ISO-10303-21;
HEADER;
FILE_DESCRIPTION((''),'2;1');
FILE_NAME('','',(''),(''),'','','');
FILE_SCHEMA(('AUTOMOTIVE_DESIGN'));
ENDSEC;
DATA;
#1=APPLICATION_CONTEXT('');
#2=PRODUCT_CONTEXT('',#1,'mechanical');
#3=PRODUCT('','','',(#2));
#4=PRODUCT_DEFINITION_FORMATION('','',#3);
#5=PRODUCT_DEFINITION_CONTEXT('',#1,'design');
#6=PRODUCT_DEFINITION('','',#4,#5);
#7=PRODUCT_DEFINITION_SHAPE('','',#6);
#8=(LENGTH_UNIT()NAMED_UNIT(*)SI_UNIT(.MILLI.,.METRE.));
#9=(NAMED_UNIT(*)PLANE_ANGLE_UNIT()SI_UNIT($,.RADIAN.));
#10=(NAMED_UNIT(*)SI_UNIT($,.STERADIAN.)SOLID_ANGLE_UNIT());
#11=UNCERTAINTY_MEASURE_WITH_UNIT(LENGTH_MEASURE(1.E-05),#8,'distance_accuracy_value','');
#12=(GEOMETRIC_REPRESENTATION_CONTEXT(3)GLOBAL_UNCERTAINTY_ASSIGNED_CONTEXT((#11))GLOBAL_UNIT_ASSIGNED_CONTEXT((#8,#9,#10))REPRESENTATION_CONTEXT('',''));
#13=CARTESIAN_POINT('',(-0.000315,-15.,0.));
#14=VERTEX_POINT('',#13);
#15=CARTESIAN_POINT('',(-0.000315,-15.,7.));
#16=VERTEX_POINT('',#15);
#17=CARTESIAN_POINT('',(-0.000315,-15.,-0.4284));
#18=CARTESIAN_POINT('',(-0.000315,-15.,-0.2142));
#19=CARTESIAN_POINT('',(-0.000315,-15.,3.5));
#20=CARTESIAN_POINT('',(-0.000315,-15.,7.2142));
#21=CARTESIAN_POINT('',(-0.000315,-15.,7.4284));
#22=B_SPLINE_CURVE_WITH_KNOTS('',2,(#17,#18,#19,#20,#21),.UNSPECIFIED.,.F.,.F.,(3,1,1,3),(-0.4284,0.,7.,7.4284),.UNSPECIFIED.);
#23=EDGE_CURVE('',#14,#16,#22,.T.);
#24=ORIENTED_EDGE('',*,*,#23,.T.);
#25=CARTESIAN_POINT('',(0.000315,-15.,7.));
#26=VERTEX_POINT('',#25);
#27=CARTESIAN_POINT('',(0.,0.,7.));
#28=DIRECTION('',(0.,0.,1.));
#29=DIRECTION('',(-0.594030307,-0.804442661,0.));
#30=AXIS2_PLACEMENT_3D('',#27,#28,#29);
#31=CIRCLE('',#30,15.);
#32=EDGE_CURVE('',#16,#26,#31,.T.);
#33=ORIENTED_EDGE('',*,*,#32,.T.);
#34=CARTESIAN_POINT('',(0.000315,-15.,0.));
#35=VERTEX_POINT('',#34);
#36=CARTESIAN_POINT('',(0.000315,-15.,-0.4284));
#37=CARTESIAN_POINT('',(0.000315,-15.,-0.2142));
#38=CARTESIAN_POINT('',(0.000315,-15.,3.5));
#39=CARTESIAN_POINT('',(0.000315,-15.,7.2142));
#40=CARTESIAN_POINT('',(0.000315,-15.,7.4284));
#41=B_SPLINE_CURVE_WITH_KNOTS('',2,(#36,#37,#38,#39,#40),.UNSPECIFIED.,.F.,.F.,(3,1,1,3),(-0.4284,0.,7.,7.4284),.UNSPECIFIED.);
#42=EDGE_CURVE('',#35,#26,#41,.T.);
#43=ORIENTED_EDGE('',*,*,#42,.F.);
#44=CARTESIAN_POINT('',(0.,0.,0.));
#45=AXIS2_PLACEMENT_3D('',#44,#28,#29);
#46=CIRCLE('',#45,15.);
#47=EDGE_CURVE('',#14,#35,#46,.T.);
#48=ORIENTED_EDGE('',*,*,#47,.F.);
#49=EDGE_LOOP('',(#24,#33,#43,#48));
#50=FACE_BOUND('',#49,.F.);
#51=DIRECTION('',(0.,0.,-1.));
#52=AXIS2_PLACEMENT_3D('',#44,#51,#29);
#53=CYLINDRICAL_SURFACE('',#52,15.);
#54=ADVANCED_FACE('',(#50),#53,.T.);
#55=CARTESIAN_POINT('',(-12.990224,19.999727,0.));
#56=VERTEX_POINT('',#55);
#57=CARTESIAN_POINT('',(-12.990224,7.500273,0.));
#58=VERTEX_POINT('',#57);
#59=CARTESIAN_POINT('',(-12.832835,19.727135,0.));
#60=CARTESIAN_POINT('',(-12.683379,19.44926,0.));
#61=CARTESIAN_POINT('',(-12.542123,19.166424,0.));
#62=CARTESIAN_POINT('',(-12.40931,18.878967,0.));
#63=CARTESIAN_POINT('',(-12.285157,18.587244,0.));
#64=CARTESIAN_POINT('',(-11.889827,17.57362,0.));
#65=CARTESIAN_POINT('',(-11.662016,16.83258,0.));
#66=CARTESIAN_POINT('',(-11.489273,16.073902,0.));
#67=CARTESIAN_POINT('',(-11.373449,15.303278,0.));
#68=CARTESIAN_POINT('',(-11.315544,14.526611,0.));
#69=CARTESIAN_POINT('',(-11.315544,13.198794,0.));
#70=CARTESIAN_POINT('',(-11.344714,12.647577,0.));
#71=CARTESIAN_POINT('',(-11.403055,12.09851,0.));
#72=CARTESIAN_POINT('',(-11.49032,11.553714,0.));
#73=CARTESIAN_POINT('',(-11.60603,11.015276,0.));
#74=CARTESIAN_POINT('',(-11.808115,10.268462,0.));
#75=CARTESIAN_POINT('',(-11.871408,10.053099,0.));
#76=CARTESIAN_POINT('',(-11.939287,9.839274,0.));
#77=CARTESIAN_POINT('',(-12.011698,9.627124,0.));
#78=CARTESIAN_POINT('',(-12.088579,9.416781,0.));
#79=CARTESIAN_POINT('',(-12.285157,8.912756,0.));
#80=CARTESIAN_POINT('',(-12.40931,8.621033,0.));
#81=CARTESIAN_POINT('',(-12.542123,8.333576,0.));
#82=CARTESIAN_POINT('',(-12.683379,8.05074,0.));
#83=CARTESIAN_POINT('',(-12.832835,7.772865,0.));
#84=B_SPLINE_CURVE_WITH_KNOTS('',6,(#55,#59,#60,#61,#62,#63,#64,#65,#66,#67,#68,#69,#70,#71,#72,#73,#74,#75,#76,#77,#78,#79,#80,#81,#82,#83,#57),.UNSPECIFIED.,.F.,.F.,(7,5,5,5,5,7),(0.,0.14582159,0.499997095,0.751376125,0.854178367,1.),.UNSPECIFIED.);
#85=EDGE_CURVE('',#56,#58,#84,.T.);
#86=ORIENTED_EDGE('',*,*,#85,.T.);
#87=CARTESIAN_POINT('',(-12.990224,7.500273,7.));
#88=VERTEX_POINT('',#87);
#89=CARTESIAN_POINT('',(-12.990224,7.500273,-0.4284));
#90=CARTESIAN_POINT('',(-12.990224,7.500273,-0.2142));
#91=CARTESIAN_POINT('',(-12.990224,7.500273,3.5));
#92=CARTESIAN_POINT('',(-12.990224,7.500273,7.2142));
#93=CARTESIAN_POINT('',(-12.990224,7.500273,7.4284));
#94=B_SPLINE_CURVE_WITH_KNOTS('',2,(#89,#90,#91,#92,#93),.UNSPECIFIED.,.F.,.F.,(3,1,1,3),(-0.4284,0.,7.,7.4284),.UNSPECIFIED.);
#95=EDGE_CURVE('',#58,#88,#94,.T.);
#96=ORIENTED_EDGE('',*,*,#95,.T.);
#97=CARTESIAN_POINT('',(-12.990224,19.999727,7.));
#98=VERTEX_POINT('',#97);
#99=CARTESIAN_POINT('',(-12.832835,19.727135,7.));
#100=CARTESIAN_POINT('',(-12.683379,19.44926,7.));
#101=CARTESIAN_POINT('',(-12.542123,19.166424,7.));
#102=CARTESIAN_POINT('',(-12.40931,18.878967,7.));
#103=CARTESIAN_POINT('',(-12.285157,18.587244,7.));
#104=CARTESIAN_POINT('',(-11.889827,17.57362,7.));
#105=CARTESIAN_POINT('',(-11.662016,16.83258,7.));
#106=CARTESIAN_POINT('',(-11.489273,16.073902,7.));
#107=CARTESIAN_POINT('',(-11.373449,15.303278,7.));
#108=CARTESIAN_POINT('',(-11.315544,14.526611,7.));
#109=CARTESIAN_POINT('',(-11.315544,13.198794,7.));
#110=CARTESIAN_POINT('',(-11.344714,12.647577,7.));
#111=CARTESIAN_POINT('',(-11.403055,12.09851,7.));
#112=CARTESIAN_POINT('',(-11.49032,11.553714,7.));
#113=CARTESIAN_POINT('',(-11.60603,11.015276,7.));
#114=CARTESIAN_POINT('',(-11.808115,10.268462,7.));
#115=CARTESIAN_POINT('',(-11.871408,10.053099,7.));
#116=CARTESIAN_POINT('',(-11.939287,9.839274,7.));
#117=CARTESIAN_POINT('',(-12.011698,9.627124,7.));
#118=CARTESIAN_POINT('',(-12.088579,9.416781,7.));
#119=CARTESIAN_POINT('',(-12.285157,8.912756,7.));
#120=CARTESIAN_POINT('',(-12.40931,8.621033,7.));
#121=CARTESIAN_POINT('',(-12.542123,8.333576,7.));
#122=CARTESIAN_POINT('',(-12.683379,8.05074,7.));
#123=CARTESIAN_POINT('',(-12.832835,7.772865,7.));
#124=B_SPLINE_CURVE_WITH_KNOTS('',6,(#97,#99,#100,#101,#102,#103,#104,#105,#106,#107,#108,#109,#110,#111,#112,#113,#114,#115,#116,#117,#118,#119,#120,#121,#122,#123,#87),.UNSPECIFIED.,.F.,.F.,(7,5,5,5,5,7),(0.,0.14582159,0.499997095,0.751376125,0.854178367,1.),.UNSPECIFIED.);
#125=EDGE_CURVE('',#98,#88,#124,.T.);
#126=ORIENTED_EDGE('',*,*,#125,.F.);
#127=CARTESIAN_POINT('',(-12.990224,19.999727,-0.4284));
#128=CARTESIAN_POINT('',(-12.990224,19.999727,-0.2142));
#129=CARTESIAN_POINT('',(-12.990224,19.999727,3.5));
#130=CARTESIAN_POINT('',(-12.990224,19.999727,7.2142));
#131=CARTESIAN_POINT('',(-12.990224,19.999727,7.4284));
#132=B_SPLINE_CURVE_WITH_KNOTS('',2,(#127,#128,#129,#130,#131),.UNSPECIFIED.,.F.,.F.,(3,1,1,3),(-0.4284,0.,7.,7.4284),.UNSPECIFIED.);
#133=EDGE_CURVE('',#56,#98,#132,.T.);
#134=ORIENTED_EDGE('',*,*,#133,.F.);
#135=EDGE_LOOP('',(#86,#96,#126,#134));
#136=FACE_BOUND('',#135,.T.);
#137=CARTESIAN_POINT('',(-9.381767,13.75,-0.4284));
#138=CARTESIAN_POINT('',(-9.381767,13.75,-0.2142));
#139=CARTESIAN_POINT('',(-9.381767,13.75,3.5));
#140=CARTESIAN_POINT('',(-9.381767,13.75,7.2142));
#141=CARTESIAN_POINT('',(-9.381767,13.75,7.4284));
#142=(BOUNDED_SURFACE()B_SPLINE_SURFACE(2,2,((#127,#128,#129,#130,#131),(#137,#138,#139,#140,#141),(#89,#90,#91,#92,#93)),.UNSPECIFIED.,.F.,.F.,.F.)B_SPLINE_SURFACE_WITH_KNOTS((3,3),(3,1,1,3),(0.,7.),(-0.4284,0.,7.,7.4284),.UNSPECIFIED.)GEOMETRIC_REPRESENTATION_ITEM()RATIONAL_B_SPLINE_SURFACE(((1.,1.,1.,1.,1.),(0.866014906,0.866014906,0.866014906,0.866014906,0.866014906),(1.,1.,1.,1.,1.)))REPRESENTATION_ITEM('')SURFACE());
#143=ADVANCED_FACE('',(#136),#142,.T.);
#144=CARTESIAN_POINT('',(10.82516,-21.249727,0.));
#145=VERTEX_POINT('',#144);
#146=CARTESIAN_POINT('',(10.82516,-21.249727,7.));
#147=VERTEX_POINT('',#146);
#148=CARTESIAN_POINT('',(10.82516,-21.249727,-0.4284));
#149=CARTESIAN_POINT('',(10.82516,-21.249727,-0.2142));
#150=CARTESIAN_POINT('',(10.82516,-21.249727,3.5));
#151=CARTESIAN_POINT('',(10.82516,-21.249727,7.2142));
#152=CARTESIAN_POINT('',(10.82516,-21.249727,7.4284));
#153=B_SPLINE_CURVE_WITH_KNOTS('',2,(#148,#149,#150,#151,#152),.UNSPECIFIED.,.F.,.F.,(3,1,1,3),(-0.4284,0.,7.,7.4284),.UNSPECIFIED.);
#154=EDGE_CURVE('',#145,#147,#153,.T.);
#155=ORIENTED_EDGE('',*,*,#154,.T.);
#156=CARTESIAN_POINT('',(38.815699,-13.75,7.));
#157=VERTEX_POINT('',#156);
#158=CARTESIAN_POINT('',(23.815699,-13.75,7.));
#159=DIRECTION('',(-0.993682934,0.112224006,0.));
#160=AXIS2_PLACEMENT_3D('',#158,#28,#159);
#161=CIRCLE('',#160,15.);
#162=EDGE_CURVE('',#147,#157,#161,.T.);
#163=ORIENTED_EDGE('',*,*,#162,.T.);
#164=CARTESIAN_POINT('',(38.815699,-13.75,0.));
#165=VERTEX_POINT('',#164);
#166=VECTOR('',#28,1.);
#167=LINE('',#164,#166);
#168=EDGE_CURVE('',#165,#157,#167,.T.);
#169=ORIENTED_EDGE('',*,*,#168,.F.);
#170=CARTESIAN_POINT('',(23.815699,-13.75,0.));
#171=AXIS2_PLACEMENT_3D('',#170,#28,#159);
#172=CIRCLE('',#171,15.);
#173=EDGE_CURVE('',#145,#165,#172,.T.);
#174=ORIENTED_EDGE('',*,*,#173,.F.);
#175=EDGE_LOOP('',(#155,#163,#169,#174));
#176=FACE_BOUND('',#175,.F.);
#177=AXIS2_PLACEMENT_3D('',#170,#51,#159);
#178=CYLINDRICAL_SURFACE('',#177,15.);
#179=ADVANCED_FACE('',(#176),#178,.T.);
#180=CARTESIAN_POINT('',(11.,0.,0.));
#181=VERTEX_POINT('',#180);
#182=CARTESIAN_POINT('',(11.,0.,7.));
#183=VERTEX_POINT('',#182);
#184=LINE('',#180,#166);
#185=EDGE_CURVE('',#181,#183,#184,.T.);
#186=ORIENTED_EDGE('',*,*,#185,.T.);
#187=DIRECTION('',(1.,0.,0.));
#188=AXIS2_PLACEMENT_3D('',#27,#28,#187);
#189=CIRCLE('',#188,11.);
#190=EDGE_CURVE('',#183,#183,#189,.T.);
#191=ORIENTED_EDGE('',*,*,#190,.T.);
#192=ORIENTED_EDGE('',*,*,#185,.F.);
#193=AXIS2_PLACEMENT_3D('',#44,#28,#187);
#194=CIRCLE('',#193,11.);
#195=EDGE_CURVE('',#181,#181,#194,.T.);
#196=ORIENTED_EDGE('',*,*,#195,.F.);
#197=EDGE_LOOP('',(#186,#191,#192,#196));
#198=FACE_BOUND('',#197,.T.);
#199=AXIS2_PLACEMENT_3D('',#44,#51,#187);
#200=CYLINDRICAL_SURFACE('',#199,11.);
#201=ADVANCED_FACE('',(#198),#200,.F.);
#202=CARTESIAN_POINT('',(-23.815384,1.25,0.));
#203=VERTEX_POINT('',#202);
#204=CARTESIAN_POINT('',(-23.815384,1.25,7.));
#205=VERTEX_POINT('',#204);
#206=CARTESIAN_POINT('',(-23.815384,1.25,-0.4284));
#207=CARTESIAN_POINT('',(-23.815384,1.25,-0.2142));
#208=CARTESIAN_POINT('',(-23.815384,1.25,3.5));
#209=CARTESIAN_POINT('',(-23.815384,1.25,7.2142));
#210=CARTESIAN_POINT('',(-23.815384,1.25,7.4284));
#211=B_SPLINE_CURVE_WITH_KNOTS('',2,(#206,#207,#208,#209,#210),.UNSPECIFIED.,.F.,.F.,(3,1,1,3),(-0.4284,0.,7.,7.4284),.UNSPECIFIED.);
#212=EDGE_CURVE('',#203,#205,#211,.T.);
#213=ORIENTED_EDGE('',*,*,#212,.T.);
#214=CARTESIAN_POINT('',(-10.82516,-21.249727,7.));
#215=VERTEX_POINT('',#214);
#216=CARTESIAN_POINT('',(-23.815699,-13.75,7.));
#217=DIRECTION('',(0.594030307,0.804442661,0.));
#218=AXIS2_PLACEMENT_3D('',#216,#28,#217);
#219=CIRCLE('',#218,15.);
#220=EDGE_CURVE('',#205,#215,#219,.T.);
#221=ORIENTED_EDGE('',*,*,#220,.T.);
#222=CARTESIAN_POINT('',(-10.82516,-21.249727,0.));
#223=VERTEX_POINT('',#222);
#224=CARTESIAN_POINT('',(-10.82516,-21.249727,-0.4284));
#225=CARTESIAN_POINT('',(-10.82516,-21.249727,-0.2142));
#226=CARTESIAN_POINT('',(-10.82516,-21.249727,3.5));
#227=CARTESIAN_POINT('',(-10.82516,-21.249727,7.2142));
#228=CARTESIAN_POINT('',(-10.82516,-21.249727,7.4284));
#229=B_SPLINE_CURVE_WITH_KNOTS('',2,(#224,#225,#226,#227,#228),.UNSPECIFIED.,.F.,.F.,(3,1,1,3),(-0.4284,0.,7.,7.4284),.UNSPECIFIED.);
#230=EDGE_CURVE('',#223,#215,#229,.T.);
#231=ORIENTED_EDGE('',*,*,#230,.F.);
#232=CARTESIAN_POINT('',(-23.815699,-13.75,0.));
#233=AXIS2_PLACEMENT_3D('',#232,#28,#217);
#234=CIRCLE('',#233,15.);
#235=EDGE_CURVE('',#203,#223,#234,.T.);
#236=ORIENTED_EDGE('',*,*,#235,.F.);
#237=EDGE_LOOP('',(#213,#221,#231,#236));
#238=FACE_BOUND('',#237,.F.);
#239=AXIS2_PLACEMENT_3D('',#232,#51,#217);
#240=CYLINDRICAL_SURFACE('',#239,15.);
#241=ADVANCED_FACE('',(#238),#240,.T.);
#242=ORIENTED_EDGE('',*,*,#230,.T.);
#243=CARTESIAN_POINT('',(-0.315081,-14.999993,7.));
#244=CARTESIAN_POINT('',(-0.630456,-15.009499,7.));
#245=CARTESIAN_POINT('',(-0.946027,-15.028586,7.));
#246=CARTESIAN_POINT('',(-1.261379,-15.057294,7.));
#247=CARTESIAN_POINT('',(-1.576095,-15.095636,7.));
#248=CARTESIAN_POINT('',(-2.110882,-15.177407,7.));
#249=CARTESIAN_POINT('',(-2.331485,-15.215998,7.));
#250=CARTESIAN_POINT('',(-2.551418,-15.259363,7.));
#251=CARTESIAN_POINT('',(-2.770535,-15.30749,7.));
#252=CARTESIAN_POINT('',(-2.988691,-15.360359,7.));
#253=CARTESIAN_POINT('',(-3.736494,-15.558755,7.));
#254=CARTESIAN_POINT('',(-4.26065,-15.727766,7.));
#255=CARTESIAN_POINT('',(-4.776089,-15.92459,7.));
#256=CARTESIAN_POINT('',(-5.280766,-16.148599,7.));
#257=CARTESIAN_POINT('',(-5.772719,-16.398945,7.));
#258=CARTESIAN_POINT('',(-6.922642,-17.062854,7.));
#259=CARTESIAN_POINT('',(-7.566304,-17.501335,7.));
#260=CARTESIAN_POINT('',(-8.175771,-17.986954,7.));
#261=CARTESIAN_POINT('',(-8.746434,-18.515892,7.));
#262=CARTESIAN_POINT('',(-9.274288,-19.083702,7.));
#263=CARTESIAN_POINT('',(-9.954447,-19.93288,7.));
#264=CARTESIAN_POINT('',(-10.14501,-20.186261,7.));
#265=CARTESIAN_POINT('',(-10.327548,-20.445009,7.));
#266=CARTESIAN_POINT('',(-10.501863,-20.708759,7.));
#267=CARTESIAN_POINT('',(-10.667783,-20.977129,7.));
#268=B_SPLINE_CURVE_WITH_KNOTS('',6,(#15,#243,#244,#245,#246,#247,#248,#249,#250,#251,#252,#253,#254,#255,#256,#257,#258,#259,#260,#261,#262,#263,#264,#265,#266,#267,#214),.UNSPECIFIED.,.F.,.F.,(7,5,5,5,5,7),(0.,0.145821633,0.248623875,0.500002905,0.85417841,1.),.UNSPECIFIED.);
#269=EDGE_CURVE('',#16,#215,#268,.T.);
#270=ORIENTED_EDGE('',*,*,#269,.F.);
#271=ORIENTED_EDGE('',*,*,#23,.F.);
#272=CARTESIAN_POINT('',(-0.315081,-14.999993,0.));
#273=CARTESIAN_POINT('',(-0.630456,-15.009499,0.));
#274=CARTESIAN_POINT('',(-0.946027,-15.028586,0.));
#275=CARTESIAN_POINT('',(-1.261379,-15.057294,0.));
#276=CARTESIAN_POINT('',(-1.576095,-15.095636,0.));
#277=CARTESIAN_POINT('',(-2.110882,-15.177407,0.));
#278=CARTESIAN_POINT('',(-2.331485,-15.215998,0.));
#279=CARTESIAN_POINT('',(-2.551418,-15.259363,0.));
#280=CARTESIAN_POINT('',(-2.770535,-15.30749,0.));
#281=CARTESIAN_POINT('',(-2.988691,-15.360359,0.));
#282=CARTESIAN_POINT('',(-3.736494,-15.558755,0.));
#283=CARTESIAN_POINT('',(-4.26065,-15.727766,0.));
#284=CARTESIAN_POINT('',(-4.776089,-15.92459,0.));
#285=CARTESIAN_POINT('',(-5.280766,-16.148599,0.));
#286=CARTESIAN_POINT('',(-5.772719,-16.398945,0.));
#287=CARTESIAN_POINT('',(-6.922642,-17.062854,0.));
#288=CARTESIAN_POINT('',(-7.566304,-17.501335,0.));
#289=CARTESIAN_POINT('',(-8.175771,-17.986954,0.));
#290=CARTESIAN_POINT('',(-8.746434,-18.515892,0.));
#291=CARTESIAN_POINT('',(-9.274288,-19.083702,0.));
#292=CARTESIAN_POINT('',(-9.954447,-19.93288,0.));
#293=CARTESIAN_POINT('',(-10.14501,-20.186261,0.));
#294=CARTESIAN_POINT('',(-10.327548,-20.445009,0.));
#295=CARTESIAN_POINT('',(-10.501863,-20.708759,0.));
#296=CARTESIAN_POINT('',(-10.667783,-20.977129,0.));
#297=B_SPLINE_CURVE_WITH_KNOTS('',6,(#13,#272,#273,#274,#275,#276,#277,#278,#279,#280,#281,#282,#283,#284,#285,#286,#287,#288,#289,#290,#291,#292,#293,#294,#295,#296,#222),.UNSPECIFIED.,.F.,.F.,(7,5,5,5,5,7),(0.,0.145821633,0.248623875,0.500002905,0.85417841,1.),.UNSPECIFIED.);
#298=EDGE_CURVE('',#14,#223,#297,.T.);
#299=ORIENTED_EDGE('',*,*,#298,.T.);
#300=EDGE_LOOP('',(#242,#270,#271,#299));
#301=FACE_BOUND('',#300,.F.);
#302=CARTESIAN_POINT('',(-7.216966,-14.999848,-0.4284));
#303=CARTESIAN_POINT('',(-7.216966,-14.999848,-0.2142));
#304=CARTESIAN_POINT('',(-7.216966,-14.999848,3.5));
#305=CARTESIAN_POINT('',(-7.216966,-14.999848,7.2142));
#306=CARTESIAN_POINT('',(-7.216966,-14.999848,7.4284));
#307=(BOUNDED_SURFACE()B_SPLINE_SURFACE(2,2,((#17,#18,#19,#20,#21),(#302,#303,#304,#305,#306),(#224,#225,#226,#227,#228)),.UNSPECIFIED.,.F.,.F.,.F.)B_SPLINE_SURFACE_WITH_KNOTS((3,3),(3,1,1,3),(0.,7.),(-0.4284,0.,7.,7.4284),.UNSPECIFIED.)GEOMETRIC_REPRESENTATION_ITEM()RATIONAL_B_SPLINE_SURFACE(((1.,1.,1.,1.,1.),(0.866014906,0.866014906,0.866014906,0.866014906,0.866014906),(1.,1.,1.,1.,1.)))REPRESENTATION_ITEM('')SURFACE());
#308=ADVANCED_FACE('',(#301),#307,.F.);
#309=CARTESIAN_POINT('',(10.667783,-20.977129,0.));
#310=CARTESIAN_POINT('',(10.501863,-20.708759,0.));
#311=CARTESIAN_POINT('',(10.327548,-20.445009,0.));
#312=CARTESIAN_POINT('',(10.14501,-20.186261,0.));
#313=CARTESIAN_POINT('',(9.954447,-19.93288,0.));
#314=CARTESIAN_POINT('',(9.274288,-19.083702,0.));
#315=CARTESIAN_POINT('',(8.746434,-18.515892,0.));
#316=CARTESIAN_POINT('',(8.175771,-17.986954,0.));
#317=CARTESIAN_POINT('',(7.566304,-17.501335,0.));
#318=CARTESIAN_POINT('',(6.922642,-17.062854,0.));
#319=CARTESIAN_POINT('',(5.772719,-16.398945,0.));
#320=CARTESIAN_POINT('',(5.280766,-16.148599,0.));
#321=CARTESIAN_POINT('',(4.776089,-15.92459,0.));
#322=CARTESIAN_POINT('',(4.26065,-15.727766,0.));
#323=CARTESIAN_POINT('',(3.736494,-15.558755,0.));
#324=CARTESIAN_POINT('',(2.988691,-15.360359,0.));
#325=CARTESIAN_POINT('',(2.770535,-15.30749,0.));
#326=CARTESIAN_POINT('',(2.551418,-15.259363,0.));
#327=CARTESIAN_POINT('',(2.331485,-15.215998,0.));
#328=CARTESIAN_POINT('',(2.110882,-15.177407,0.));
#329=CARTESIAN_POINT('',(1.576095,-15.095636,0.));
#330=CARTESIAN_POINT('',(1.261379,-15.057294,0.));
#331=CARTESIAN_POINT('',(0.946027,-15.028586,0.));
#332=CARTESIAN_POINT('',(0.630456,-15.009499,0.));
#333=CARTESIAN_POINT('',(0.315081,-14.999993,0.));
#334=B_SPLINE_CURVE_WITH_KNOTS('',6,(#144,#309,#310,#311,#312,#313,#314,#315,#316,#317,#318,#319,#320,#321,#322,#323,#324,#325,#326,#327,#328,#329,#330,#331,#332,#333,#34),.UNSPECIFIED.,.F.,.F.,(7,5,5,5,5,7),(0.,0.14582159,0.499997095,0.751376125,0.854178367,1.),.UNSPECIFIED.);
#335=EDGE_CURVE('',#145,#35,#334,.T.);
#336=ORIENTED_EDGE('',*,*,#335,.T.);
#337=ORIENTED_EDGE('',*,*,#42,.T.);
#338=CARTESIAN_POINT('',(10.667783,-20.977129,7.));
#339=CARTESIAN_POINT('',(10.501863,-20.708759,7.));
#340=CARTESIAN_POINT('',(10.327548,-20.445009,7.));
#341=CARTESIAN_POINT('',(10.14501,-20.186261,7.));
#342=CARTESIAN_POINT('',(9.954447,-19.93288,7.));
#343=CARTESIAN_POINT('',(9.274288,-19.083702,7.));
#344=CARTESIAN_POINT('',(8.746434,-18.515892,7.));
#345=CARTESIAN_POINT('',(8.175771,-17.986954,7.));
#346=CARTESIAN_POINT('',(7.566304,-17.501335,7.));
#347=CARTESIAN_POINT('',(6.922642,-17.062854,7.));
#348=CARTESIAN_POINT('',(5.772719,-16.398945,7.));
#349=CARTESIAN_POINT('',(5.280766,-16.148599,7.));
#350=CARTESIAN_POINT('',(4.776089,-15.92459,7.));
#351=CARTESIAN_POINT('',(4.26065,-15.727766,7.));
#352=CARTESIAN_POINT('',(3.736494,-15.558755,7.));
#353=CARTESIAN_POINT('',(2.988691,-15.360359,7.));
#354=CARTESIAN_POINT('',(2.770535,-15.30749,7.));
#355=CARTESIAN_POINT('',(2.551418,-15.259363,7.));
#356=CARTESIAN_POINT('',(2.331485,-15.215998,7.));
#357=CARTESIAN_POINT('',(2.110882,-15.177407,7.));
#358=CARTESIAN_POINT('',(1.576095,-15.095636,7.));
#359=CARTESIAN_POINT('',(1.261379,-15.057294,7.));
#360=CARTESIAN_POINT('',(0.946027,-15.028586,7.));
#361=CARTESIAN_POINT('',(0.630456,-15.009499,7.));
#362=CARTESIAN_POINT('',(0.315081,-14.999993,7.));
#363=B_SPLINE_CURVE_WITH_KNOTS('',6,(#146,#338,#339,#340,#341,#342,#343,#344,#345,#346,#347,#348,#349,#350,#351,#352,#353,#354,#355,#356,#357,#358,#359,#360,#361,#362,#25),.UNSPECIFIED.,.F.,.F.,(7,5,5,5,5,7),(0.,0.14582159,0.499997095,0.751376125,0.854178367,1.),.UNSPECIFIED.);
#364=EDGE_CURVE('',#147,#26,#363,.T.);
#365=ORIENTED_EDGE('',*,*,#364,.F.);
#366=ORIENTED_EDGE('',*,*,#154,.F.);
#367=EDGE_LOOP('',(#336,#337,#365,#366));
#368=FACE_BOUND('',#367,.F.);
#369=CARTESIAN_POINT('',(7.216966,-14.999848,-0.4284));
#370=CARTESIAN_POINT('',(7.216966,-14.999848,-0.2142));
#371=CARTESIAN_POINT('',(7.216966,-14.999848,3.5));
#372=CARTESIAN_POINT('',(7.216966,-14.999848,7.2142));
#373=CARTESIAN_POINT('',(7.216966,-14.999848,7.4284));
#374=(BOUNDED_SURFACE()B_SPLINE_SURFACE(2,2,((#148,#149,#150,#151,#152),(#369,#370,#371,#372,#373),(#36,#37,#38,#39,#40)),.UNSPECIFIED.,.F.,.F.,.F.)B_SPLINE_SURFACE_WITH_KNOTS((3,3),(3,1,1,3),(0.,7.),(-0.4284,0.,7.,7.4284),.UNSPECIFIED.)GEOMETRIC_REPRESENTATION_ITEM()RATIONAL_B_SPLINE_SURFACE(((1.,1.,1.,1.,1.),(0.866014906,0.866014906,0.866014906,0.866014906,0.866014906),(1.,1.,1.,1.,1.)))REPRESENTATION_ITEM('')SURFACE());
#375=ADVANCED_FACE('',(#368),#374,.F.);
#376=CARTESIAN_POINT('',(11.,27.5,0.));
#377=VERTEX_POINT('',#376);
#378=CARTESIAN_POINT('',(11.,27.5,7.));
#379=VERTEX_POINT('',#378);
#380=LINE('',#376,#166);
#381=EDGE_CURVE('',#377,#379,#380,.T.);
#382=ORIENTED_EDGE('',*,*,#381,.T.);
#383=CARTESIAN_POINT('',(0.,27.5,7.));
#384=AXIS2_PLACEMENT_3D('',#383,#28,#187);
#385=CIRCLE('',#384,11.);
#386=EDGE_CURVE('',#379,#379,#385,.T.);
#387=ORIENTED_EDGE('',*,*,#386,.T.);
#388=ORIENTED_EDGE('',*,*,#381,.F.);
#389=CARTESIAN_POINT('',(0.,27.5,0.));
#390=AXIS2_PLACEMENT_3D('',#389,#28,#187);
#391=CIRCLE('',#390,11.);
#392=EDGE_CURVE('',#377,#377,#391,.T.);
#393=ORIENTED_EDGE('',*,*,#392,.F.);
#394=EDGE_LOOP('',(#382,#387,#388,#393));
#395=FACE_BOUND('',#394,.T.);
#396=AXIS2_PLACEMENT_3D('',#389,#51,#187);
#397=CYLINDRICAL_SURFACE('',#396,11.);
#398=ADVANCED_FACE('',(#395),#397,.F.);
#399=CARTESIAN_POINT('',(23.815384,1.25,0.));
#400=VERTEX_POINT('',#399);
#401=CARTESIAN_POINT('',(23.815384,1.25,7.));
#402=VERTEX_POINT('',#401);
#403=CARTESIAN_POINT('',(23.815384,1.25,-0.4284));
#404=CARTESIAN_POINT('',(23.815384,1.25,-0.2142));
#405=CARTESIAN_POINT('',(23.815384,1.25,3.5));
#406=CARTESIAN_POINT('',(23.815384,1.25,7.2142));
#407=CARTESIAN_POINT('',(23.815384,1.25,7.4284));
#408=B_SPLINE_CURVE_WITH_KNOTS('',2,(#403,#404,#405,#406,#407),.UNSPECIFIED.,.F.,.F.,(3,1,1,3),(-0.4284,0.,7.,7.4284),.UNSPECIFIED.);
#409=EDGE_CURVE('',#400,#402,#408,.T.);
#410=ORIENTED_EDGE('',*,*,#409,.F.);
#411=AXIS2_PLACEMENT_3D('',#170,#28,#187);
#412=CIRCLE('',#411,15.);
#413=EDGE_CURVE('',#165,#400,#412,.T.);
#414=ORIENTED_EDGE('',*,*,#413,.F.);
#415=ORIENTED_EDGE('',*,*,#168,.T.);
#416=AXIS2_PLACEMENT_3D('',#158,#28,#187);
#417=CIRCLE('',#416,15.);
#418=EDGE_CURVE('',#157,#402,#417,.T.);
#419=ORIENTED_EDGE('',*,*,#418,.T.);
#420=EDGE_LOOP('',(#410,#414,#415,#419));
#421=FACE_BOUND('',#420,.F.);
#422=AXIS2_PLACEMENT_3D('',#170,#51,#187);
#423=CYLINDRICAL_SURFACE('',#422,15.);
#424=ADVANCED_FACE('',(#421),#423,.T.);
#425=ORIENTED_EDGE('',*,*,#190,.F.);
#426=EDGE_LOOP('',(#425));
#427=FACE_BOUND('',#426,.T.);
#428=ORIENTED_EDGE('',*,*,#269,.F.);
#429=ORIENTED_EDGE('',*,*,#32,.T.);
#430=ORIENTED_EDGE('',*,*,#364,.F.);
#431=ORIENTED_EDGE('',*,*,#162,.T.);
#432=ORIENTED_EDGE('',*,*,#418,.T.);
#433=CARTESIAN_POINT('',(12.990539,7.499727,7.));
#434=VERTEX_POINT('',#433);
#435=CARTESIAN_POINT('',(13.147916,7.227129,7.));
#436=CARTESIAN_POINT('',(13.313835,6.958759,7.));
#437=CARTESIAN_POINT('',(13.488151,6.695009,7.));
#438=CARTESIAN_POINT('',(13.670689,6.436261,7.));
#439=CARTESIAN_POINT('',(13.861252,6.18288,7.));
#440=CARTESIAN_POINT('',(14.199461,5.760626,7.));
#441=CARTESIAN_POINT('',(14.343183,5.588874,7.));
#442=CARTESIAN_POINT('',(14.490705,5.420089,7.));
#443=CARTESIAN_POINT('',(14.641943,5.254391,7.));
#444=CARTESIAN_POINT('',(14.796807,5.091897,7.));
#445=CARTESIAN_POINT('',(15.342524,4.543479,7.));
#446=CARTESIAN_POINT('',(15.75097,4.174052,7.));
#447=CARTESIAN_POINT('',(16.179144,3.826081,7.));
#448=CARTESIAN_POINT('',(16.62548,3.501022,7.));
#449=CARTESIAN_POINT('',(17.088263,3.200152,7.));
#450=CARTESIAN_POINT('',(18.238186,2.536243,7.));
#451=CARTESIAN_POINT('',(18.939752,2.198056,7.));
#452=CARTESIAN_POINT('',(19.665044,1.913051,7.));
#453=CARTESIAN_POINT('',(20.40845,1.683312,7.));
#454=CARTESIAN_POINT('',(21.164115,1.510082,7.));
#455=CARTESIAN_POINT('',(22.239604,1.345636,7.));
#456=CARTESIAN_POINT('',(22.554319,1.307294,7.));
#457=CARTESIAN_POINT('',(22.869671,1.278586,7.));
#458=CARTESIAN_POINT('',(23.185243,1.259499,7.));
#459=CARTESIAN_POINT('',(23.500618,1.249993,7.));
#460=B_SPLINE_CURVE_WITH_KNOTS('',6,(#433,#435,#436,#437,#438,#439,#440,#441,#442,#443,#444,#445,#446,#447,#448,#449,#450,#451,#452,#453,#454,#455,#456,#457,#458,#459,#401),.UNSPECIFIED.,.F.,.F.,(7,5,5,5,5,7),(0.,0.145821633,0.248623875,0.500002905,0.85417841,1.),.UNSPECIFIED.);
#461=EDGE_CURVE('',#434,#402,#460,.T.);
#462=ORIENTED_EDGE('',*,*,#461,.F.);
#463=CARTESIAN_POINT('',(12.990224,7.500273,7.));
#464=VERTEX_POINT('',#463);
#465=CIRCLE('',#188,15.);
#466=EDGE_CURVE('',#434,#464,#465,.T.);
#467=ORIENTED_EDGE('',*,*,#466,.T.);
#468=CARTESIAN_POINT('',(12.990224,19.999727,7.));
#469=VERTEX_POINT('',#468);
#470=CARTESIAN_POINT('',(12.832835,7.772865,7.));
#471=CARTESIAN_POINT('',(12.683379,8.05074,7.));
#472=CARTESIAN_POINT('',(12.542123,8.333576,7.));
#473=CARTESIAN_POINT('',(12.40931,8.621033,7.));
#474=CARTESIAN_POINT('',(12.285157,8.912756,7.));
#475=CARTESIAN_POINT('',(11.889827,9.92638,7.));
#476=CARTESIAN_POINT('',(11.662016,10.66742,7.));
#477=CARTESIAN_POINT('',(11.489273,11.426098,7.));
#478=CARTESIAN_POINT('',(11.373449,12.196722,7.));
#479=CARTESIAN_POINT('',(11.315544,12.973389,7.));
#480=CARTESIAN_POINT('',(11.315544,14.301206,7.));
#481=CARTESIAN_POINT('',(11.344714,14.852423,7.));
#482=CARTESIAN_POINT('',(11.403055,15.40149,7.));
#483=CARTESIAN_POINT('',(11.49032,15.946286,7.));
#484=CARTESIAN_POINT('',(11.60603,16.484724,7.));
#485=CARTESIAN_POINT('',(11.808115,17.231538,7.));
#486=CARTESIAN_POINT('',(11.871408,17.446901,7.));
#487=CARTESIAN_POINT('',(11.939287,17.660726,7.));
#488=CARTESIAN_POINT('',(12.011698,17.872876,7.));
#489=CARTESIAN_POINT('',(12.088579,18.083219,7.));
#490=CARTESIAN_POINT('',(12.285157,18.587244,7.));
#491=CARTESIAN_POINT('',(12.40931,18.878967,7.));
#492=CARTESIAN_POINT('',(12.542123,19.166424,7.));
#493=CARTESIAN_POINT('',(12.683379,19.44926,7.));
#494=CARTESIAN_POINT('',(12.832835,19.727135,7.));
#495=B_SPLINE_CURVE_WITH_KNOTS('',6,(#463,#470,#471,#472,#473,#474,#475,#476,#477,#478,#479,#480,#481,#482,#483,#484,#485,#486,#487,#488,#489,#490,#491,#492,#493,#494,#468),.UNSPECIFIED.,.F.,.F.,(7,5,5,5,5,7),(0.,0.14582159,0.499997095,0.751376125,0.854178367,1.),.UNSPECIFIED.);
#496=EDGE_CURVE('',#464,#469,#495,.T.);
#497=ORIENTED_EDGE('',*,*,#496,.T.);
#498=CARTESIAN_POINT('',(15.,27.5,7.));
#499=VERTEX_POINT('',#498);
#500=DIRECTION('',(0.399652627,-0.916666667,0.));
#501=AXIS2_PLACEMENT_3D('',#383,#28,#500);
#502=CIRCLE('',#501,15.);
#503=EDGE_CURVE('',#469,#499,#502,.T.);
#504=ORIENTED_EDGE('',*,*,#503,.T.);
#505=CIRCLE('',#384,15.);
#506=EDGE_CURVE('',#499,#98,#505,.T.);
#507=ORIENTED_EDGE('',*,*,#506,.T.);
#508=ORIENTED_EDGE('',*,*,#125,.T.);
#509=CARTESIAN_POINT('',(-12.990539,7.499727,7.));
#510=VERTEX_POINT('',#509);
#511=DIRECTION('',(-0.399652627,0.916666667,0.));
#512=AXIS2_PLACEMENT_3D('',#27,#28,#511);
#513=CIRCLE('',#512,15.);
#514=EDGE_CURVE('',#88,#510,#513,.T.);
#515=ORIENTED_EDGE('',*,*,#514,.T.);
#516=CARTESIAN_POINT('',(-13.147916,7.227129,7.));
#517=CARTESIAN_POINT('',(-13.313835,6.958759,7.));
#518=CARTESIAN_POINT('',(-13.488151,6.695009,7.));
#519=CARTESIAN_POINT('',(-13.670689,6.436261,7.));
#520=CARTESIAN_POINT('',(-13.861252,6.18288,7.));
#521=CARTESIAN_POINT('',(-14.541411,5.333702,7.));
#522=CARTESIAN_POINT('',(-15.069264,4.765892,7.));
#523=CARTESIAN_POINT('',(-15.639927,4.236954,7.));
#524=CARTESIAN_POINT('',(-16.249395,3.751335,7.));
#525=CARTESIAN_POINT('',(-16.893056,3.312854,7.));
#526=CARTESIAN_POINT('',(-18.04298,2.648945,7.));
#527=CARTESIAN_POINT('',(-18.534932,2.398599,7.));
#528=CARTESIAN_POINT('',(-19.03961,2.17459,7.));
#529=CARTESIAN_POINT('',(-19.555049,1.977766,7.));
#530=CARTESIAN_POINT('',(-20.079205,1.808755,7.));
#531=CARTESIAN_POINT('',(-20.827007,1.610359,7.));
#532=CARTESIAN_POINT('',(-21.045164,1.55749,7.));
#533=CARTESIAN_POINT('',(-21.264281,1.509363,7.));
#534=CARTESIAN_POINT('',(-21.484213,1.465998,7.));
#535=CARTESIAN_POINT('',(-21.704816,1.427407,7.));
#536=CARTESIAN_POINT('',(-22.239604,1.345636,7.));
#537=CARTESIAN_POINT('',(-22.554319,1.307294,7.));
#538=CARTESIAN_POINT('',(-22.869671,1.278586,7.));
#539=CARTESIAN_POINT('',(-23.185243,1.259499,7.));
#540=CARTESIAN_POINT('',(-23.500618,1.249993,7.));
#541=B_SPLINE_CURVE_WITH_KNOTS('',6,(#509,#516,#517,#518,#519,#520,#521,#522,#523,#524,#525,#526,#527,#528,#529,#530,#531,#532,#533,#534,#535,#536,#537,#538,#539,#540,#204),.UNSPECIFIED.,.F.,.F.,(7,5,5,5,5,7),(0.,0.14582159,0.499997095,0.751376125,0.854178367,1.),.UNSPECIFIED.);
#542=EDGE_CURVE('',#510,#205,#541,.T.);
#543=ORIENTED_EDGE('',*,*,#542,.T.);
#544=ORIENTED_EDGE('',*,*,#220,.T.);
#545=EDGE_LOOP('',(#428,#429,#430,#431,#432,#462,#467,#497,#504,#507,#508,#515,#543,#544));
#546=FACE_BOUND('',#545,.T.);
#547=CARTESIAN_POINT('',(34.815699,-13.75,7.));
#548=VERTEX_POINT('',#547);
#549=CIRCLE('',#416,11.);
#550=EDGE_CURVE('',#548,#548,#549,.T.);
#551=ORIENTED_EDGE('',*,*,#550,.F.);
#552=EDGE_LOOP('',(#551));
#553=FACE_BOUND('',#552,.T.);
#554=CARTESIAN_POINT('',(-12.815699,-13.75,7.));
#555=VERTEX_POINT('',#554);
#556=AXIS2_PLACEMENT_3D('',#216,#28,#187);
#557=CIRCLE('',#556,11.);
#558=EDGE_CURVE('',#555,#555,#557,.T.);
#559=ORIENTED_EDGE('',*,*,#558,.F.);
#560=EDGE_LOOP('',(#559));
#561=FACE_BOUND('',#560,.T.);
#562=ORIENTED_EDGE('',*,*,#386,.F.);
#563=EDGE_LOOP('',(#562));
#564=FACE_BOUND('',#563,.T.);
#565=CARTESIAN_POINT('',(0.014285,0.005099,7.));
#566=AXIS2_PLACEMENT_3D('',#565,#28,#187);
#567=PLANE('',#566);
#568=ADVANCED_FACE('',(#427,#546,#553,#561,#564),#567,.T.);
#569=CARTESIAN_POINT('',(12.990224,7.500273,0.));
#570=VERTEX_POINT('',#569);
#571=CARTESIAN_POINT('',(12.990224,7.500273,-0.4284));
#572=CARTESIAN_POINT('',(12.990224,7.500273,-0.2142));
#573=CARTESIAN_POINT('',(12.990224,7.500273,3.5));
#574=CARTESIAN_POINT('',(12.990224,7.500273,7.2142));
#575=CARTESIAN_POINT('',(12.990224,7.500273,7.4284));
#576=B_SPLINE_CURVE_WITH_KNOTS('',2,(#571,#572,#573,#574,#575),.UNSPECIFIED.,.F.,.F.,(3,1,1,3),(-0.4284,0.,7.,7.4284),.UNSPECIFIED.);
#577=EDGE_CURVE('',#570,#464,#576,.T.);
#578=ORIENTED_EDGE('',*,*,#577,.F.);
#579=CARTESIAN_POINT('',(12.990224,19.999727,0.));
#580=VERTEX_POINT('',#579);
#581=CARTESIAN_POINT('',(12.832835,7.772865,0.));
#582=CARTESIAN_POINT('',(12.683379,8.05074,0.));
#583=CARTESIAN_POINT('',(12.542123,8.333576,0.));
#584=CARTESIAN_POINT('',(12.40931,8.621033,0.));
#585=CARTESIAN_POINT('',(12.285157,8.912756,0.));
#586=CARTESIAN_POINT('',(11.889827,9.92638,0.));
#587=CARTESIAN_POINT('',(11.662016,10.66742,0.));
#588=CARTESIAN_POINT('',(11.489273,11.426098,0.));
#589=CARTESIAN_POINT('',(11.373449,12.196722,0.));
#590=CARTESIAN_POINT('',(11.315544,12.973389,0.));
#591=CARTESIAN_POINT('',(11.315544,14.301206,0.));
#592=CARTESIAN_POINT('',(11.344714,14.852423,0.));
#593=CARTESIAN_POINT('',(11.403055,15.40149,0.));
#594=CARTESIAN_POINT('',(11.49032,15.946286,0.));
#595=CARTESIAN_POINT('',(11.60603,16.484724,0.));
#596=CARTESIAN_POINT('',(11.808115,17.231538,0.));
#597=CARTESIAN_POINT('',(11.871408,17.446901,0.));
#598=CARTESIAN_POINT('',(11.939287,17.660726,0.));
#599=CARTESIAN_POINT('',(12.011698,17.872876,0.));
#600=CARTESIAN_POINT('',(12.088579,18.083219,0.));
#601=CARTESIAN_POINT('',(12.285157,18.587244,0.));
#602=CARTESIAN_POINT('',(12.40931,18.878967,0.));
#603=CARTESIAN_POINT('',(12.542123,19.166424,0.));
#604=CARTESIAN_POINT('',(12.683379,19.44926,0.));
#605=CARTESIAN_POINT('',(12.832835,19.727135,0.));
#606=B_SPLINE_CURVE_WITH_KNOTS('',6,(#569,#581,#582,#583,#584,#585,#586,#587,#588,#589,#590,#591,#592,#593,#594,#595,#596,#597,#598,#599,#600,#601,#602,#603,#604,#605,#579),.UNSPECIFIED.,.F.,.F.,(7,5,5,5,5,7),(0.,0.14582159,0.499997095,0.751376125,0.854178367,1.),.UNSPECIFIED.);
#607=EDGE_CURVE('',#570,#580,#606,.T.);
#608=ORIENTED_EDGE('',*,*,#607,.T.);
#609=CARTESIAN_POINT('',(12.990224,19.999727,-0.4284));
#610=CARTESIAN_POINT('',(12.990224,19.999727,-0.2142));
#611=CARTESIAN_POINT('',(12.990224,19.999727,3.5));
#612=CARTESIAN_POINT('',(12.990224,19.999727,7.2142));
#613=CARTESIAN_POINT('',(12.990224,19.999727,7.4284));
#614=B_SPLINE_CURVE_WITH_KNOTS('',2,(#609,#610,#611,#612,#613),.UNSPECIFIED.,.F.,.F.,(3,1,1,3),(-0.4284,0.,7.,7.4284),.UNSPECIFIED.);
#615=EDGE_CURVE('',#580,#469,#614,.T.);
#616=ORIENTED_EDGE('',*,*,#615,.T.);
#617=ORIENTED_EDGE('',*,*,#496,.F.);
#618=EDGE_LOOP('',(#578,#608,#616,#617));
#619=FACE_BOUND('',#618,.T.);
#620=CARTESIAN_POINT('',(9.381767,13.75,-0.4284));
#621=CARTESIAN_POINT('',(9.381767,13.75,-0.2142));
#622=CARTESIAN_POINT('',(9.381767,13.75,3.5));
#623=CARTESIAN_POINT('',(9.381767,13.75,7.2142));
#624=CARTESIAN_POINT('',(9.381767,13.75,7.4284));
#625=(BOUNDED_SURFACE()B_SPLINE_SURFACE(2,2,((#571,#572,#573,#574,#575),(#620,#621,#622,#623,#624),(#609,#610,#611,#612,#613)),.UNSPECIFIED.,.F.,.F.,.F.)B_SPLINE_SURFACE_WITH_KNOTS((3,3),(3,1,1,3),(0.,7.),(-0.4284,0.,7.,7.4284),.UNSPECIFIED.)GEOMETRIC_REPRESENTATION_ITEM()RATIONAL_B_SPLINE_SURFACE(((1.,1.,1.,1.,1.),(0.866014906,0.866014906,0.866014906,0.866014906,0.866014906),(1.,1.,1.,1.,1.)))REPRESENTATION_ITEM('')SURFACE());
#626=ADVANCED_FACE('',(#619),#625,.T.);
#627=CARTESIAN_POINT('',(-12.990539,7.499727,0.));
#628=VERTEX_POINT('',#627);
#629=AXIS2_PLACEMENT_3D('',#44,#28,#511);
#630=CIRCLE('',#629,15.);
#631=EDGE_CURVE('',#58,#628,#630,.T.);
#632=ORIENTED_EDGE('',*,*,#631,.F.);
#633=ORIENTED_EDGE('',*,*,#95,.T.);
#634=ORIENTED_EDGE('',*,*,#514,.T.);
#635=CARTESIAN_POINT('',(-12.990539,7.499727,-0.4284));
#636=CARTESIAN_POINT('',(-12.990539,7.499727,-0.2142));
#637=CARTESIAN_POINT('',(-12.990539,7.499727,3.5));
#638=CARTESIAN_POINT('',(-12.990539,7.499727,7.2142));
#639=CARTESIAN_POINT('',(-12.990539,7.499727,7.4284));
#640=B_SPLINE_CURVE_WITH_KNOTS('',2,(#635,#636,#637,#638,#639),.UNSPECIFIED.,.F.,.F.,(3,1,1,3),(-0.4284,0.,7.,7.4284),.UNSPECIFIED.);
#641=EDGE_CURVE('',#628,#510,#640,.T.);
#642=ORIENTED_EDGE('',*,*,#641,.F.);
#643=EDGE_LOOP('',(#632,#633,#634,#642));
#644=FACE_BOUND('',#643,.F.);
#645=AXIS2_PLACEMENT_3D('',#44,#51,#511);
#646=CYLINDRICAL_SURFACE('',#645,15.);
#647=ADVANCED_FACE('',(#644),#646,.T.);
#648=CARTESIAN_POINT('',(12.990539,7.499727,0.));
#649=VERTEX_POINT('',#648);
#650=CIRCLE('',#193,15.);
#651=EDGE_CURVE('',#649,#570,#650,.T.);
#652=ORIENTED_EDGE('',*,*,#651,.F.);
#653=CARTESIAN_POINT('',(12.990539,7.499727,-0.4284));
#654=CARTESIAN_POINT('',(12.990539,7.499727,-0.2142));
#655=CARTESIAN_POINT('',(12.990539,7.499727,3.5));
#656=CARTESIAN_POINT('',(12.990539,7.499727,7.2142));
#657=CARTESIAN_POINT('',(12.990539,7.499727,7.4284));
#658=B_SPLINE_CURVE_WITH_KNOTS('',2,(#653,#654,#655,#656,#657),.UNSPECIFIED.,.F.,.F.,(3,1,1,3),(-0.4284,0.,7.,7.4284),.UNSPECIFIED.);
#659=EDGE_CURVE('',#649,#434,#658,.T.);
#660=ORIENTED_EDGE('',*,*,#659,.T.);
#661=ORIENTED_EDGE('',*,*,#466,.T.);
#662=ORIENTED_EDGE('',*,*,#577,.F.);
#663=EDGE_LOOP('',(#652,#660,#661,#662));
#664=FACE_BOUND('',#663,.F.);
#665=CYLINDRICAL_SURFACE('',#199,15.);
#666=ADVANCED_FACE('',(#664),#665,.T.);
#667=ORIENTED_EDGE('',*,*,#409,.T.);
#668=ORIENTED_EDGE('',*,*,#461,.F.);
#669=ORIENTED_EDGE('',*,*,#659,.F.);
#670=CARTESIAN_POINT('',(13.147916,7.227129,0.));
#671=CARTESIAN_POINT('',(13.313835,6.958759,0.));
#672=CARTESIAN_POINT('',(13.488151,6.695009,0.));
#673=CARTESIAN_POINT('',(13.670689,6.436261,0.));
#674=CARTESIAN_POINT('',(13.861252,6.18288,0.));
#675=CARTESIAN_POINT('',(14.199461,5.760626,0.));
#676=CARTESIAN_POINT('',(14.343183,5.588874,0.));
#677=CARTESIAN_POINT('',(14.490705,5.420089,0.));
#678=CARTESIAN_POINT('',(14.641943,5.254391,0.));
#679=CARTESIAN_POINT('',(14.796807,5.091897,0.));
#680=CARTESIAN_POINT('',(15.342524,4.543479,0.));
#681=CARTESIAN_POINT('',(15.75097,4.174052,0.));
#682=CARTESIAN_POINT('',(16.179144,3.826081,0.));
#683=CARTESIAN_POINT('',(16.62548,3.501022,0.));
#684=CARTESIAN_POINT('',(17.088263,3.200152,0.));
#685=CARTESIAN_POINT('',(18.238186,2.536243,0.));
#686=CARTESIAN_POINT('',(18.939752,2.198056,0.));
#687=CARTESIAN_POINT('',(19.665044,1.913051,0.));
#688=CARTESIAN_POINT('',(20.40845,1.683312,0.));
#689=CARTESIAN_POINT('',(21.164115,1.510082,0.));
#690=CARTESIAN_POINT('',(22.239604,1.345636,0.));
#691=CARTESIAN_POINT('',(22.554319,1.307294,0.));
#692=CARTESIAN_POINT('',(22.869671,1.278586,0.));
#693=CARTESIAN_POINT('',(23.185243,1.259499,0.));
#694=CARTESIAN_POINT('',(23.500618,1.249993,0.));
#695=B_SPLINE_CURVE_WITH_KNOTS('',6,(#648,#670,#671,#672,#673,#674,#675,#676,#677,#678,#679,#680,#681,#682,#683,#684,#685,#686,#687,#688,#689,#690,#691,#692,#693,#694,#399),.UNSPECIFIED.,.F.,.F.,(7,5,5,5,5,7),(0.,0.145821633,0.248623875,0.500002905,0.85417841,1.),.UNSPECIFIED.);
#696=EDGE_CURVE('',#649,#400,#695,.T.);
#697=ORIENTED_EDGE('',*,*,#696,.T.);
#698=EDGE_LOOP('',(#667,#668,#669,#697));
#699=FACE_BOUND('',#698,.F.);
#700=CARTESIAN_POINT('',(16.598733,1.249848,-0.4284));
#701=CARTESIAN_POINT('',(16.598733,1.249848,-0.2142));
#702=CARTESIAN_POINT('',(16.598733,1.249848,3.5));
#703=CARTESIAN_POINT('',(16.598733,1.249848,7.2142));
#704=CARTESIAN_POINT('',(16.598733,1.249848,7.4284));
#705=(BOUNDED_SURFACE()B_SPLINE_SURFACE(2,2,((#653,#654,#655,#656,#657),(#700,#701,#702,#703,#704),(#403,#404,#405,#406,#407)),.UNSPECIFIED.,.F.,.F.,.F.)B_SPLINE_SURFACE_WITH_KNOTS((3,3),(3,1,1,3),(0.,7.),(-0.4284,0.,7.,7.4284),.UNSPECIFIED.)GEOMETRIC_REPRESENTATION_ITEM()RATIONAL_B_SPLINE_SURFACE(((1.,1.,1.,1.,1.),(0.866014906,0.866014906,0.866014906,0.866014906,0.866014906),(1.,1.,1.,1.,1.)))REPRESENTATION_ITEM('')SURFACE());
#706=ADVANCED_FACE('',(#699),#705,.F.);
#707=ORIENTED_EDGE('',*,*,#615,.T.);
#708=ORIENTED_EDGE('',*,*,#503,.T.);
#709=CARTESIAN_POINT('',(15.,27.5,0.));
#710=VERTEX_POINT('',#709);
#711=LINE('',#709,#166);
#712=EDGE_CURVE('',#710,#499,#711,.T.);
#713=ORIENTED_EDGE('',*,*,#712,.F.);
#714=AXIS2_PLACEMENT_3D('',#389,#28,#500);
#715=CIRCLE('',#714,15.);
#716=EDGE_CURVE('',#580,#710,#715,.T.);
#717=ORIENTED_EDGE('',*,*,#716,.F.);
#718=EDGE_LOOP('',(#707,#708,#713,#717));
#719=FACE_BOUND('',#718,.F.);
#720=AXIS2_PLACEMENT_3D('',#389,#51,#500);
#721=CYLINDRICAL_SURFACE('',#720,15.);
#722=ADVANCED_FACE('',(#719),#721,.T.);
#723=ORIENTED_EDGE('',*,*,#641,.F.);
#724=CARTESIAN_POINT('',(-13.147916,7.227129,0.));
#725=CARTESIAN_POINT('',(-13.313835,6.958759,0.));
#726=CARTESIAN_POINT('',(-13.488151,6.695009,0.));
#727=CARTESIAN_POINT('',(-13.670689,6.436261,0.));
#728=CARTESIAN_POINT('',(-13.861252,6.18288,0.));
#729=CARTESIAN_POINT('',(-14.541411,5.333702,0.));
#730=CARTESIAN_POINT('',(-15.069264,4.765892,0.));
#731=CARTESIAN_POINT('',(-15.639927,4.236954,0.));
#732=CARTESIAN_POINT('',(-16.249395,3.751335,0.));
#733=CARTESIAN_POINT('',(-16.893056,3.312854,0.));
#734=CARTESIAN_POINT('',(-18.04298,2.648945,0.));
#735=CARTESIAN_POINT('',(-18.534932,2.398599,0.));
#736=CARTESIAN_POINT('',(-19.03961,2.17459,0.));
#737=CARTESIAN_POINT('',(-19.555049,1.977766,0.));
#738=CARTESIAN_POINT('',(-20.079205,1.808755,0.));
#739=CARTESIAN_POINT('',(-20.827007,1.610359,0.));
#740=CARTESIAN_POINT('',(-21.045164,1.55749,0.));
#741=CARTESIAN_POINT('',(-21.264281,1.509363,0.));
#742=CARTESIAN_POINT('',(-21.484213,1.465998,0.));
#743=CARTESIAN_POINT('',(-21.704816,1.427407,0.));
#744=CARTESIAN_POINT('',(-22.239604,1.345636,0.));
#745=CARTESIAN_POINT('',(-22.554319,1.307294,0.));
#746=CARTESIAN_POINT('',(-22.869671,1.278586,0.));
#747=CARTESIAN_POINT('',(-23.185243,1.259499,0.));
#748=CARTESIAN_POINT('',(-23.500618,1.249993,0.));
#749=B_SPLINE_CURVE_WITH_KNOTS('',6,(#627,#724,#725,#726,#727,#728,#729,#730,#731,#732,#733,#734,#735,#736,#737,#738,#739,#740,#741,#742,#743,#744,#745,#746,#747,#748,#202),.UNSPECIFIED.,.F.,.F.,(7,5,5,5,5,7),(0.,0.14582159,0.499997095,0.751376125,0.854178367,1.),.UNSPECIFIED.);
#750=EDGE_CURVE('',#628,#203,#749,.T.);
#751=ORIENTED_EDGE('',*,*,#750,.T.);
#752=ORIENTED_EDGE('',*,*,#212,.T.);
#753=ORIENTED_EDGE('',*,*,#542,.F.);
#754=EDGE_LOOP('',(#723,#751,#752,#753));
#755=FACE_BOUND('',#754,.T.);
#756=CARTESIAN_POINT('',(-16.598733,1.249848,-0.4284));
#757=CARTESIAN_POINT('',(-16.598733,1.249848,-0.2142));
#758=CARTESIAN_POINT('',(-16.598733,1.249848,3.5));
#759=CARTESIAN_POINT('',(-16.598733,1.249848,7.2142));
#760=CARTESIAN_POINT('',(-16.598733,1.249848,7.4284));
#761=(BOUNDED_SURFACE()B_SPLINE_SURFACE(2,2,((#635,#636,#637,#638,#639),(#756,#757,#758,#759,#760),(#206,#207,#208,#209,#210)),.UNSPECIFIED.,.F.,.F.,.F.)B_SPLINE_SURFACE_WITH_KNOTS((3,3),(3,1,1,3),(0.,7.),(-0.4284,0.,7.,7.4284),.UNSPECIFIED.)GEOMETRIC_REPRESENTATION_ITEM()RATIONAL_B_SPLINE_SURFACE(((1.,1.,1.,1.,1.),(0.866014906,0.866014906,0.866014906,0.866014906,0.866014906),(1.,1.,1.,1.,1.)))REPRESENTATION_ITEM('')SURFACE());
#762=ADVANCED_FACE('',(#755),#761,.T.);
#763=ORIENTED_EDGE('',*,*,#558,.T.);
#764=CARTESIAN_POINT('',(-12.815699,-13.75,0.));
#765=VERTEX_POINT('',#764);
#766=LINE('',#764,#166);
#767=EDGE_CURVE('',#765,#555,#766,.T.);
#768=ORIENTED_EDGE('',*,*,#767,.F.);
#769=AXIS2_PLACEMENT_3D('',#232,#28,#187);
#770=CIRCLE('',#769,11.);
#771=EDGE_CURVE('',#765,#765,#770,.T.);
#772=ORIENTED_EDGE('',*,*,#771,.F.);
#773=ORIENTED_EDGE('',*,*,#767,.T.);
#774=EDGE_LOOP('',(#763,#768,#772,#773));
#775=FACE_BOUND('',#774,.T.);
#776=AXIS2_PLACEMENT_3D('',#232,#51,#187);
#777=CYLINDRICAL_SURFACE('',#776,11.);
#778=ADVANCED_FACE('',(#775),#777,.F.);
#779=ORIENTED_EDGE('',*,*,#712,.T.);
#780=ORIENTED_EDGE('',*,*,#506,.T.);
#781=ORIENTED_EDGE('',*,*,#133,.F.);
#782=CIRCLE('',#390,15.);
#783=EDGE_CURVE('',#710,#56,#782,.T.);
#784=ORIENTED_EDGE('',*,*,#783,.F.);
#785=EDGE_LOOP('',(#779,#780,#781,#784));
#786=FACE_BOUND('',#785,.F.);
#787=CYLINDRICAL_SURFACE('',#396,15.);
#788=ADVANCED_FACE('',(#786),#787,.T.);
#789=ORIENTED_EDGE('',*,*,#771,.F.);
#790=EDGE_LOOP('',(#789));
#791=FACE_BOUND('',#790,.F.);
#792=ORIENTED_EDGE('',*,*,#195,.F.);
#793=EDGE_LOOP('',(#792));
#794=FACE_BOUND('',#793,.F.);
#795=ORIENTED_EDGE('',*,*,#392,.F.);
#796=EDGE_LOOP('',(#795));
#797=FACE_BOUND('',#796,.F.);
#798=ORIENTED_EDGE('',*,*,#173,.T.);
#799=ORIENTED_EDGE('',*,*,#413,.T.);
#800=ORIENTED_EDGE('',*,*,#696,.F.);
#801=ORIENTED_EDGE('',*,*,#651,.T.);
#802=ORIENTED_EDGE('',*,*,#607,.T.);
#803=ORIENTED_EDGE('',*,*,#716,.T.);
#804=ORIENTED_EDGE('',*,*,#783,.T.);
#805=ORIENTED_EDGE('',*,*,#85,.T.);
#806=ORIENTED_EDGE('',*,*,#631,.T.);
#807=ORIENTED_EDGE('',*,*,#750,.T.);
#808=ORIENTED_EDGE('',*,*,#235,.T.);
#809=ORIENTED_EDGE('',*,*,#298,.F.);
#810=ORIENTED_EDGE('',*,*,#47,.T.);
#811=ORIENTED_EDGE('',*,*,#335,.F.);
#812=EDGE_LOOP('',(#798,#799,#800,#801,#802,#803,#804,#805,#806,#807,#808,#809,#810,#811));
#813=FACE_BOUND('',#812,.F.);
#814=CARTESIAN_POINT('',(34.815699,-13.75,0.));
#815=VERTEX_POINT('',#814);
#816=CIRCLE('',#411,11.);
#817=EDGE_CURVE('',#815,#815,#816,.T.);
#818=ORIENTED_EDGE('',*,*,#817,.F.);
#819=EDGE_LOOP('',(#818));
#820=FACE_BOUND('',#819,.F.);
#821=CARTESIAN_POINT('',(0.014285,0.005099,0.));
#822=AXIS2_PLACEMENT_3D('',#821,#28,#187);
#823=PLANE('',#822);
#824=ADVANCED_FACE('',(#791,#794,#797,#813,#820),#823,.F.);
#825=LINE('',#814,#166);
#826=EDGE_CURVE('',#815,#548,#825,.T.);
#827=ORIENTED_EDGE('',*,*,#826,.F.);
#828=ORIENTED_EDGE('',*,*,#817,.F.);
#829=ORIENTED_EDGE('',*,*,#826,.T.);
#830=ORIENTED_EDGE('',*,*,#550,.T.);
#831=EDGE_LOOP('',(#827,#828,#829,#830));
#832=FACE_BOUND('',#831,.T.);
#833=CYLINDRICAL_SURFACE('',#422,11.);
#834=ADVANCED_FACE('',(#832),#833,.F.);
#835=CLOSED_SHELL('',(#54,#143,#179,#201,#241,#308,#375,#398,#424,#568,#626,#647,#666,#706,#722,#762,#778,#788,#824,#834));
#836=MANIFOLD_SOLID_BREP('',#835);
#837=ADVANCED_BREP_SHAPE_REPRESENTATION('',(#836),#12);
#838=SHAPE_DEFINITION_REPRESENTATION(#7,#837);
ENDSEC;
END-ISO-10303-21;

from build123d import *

# Parameters (mm, degrees)
F0_R     = 11
F1_DEPTH = 7
F2_R     = 12.499


# Not quite as in the source:
# - a fillet or chamfer is up to 0.001 mm smaller than in the source, because OpenCascade refuses the exact size


with BuildPart() as f1:
    # F0 (on Top) → F1 (new body)
    with BuildSketch(Plane.XY):
        with BuildLine():
            ThreePointArc((14.9052440041, -1.6833600857), (14.9762922658, -0.8430124372), (15, 0))
            ThreePointArc((15, 0), (12.5483433381, 8.2182163192), (5.9947894041, 13.75))
            ThreePointArc((5.9947894041, 13.75), (0, 12.5), (-5.9947894041, 13.75))
            ThreePointArc((-5.9947894041, 13.75), (-12.9903810568, 7.5), (-14.9052440041, -1.6833600857))
            ThreePointArc((-14.9052440041, -1.6833600857), (-10.8253175473, -6.25), (-8.9104546, -12.0666399143))
            ThreePointArc((-8.9104546, -12.0666399143), (0, -15), (8.9104546, -12.0666399143))
            ThreePointArc((8.9104546, -12.0666399143), (10.8253175473, -6.25), (14.9052440041, -1.6833600857))
        make_face()
        Circle(F0_R, mode=Mode.SUBTRACT)
        with BuildLine():
            ThreePointArc((-5.9947894041, 13.75), (0, 12.5), (5.9947894041, 13.75))
            ThreePointArc((5.9947894041, 13.75), (0, 15), (-5.9947894041, 13.75))
        make_face()
        with BuildLine():
            ThreePointArc((-5.9947894041, 13.75), (0, 15), (5.9947894041, 13.75))
            ThreePointArc((5.9947894041, 13.75), (12.5483433381, 19.2817836808), (15, 27.5))
            ThreePointArc((15, 27.5), (-8.2182163192, 40.0483433381), (-5.9947894041, 13.75))
        make_face()
        with Locations((0, 27.5)):
            Circle(F0_R, mode=Mode.SUBTRACT)
        with BuildLine():
            ThreePointArc((38.8156986041, -13.75), (30.5737745507, -0.3586442247), (14.9052440041, -1.6833600857))
            ThreePointArc((14.9052440041, -1.6833600857), (12.9903810568, -7.5), (8.9104546, -12.0666399143))
            ThreePointArc((8.9104546, -12.0666399143), (22.9726861669, -28.7262922658), (38.8156986041, -13.75))
        make_face()
        with Locations((23.8156986041, -13.75)):
            Circle(F0_R, mode=Mode.SUBTRACT)
        with BuildLine():
            ThreePointArc((8.9104546, -12.0666399143), (12.9903810568, -7.5), (14.9052440041, -1.6833600857))
            ThreePointArc((14.9052440041, -1.6833600857), (10.8253175473, -6.25), (8.9104546, -12.0666399143))
        make_face()
        with BuildLine():
            ThreePointArc((-8.9104546, -12.0666399143), (-10.8253175473, -6.25), (-14.9052440041, -1.6833600857))
            ThreePointArc((-14.9052440041, -1.6833600857), (-12.9903810568, -7.5), (-8.9104546, -12.0666399143))
        make_face()
        with BuildLine():
            ThreePointArc((-8.9104546, -12.0666399143), (-12.9903810568, -7.5), (-14.9052440041, -1.6833600857))
            ThreePointArc((-14.9052440041, -1.6833600857), (-37.2070543793, -20.5080759466), (-8.8156986041, -13.75))
            ThreePointArc((-8.8156986041, -13.75), (-8.8394063383, -12.9069875628), (-8.9104546, -12.0666399143))
        make_face()
        with Locations((-23.8156986041, -13.75)):
            Circle(F0_R, mode=Mode.SUBTRACT)
    extrude(amount=F1_DEPTH)

    # F2 (radius 12.5 in the source; OpenCascade refuses exactly that, so slightly less here)
    f2_edges = [f1.edges().sort_by_distance(p)[0] for p in [
        (-5.994789, 13.75, 3.5),
        (14.905244, -1.68336, 3.5),
        (-14.905244, -1.68336, 3.5),
        (5.994789, 13.75, 3.5),
        (-8.910455, -12.06664, 3.5),
        (8.910455, -12.06664, 3.5),
    ]]
    fillet(f2_edges, radius=F2_R)


solid = f1.part
